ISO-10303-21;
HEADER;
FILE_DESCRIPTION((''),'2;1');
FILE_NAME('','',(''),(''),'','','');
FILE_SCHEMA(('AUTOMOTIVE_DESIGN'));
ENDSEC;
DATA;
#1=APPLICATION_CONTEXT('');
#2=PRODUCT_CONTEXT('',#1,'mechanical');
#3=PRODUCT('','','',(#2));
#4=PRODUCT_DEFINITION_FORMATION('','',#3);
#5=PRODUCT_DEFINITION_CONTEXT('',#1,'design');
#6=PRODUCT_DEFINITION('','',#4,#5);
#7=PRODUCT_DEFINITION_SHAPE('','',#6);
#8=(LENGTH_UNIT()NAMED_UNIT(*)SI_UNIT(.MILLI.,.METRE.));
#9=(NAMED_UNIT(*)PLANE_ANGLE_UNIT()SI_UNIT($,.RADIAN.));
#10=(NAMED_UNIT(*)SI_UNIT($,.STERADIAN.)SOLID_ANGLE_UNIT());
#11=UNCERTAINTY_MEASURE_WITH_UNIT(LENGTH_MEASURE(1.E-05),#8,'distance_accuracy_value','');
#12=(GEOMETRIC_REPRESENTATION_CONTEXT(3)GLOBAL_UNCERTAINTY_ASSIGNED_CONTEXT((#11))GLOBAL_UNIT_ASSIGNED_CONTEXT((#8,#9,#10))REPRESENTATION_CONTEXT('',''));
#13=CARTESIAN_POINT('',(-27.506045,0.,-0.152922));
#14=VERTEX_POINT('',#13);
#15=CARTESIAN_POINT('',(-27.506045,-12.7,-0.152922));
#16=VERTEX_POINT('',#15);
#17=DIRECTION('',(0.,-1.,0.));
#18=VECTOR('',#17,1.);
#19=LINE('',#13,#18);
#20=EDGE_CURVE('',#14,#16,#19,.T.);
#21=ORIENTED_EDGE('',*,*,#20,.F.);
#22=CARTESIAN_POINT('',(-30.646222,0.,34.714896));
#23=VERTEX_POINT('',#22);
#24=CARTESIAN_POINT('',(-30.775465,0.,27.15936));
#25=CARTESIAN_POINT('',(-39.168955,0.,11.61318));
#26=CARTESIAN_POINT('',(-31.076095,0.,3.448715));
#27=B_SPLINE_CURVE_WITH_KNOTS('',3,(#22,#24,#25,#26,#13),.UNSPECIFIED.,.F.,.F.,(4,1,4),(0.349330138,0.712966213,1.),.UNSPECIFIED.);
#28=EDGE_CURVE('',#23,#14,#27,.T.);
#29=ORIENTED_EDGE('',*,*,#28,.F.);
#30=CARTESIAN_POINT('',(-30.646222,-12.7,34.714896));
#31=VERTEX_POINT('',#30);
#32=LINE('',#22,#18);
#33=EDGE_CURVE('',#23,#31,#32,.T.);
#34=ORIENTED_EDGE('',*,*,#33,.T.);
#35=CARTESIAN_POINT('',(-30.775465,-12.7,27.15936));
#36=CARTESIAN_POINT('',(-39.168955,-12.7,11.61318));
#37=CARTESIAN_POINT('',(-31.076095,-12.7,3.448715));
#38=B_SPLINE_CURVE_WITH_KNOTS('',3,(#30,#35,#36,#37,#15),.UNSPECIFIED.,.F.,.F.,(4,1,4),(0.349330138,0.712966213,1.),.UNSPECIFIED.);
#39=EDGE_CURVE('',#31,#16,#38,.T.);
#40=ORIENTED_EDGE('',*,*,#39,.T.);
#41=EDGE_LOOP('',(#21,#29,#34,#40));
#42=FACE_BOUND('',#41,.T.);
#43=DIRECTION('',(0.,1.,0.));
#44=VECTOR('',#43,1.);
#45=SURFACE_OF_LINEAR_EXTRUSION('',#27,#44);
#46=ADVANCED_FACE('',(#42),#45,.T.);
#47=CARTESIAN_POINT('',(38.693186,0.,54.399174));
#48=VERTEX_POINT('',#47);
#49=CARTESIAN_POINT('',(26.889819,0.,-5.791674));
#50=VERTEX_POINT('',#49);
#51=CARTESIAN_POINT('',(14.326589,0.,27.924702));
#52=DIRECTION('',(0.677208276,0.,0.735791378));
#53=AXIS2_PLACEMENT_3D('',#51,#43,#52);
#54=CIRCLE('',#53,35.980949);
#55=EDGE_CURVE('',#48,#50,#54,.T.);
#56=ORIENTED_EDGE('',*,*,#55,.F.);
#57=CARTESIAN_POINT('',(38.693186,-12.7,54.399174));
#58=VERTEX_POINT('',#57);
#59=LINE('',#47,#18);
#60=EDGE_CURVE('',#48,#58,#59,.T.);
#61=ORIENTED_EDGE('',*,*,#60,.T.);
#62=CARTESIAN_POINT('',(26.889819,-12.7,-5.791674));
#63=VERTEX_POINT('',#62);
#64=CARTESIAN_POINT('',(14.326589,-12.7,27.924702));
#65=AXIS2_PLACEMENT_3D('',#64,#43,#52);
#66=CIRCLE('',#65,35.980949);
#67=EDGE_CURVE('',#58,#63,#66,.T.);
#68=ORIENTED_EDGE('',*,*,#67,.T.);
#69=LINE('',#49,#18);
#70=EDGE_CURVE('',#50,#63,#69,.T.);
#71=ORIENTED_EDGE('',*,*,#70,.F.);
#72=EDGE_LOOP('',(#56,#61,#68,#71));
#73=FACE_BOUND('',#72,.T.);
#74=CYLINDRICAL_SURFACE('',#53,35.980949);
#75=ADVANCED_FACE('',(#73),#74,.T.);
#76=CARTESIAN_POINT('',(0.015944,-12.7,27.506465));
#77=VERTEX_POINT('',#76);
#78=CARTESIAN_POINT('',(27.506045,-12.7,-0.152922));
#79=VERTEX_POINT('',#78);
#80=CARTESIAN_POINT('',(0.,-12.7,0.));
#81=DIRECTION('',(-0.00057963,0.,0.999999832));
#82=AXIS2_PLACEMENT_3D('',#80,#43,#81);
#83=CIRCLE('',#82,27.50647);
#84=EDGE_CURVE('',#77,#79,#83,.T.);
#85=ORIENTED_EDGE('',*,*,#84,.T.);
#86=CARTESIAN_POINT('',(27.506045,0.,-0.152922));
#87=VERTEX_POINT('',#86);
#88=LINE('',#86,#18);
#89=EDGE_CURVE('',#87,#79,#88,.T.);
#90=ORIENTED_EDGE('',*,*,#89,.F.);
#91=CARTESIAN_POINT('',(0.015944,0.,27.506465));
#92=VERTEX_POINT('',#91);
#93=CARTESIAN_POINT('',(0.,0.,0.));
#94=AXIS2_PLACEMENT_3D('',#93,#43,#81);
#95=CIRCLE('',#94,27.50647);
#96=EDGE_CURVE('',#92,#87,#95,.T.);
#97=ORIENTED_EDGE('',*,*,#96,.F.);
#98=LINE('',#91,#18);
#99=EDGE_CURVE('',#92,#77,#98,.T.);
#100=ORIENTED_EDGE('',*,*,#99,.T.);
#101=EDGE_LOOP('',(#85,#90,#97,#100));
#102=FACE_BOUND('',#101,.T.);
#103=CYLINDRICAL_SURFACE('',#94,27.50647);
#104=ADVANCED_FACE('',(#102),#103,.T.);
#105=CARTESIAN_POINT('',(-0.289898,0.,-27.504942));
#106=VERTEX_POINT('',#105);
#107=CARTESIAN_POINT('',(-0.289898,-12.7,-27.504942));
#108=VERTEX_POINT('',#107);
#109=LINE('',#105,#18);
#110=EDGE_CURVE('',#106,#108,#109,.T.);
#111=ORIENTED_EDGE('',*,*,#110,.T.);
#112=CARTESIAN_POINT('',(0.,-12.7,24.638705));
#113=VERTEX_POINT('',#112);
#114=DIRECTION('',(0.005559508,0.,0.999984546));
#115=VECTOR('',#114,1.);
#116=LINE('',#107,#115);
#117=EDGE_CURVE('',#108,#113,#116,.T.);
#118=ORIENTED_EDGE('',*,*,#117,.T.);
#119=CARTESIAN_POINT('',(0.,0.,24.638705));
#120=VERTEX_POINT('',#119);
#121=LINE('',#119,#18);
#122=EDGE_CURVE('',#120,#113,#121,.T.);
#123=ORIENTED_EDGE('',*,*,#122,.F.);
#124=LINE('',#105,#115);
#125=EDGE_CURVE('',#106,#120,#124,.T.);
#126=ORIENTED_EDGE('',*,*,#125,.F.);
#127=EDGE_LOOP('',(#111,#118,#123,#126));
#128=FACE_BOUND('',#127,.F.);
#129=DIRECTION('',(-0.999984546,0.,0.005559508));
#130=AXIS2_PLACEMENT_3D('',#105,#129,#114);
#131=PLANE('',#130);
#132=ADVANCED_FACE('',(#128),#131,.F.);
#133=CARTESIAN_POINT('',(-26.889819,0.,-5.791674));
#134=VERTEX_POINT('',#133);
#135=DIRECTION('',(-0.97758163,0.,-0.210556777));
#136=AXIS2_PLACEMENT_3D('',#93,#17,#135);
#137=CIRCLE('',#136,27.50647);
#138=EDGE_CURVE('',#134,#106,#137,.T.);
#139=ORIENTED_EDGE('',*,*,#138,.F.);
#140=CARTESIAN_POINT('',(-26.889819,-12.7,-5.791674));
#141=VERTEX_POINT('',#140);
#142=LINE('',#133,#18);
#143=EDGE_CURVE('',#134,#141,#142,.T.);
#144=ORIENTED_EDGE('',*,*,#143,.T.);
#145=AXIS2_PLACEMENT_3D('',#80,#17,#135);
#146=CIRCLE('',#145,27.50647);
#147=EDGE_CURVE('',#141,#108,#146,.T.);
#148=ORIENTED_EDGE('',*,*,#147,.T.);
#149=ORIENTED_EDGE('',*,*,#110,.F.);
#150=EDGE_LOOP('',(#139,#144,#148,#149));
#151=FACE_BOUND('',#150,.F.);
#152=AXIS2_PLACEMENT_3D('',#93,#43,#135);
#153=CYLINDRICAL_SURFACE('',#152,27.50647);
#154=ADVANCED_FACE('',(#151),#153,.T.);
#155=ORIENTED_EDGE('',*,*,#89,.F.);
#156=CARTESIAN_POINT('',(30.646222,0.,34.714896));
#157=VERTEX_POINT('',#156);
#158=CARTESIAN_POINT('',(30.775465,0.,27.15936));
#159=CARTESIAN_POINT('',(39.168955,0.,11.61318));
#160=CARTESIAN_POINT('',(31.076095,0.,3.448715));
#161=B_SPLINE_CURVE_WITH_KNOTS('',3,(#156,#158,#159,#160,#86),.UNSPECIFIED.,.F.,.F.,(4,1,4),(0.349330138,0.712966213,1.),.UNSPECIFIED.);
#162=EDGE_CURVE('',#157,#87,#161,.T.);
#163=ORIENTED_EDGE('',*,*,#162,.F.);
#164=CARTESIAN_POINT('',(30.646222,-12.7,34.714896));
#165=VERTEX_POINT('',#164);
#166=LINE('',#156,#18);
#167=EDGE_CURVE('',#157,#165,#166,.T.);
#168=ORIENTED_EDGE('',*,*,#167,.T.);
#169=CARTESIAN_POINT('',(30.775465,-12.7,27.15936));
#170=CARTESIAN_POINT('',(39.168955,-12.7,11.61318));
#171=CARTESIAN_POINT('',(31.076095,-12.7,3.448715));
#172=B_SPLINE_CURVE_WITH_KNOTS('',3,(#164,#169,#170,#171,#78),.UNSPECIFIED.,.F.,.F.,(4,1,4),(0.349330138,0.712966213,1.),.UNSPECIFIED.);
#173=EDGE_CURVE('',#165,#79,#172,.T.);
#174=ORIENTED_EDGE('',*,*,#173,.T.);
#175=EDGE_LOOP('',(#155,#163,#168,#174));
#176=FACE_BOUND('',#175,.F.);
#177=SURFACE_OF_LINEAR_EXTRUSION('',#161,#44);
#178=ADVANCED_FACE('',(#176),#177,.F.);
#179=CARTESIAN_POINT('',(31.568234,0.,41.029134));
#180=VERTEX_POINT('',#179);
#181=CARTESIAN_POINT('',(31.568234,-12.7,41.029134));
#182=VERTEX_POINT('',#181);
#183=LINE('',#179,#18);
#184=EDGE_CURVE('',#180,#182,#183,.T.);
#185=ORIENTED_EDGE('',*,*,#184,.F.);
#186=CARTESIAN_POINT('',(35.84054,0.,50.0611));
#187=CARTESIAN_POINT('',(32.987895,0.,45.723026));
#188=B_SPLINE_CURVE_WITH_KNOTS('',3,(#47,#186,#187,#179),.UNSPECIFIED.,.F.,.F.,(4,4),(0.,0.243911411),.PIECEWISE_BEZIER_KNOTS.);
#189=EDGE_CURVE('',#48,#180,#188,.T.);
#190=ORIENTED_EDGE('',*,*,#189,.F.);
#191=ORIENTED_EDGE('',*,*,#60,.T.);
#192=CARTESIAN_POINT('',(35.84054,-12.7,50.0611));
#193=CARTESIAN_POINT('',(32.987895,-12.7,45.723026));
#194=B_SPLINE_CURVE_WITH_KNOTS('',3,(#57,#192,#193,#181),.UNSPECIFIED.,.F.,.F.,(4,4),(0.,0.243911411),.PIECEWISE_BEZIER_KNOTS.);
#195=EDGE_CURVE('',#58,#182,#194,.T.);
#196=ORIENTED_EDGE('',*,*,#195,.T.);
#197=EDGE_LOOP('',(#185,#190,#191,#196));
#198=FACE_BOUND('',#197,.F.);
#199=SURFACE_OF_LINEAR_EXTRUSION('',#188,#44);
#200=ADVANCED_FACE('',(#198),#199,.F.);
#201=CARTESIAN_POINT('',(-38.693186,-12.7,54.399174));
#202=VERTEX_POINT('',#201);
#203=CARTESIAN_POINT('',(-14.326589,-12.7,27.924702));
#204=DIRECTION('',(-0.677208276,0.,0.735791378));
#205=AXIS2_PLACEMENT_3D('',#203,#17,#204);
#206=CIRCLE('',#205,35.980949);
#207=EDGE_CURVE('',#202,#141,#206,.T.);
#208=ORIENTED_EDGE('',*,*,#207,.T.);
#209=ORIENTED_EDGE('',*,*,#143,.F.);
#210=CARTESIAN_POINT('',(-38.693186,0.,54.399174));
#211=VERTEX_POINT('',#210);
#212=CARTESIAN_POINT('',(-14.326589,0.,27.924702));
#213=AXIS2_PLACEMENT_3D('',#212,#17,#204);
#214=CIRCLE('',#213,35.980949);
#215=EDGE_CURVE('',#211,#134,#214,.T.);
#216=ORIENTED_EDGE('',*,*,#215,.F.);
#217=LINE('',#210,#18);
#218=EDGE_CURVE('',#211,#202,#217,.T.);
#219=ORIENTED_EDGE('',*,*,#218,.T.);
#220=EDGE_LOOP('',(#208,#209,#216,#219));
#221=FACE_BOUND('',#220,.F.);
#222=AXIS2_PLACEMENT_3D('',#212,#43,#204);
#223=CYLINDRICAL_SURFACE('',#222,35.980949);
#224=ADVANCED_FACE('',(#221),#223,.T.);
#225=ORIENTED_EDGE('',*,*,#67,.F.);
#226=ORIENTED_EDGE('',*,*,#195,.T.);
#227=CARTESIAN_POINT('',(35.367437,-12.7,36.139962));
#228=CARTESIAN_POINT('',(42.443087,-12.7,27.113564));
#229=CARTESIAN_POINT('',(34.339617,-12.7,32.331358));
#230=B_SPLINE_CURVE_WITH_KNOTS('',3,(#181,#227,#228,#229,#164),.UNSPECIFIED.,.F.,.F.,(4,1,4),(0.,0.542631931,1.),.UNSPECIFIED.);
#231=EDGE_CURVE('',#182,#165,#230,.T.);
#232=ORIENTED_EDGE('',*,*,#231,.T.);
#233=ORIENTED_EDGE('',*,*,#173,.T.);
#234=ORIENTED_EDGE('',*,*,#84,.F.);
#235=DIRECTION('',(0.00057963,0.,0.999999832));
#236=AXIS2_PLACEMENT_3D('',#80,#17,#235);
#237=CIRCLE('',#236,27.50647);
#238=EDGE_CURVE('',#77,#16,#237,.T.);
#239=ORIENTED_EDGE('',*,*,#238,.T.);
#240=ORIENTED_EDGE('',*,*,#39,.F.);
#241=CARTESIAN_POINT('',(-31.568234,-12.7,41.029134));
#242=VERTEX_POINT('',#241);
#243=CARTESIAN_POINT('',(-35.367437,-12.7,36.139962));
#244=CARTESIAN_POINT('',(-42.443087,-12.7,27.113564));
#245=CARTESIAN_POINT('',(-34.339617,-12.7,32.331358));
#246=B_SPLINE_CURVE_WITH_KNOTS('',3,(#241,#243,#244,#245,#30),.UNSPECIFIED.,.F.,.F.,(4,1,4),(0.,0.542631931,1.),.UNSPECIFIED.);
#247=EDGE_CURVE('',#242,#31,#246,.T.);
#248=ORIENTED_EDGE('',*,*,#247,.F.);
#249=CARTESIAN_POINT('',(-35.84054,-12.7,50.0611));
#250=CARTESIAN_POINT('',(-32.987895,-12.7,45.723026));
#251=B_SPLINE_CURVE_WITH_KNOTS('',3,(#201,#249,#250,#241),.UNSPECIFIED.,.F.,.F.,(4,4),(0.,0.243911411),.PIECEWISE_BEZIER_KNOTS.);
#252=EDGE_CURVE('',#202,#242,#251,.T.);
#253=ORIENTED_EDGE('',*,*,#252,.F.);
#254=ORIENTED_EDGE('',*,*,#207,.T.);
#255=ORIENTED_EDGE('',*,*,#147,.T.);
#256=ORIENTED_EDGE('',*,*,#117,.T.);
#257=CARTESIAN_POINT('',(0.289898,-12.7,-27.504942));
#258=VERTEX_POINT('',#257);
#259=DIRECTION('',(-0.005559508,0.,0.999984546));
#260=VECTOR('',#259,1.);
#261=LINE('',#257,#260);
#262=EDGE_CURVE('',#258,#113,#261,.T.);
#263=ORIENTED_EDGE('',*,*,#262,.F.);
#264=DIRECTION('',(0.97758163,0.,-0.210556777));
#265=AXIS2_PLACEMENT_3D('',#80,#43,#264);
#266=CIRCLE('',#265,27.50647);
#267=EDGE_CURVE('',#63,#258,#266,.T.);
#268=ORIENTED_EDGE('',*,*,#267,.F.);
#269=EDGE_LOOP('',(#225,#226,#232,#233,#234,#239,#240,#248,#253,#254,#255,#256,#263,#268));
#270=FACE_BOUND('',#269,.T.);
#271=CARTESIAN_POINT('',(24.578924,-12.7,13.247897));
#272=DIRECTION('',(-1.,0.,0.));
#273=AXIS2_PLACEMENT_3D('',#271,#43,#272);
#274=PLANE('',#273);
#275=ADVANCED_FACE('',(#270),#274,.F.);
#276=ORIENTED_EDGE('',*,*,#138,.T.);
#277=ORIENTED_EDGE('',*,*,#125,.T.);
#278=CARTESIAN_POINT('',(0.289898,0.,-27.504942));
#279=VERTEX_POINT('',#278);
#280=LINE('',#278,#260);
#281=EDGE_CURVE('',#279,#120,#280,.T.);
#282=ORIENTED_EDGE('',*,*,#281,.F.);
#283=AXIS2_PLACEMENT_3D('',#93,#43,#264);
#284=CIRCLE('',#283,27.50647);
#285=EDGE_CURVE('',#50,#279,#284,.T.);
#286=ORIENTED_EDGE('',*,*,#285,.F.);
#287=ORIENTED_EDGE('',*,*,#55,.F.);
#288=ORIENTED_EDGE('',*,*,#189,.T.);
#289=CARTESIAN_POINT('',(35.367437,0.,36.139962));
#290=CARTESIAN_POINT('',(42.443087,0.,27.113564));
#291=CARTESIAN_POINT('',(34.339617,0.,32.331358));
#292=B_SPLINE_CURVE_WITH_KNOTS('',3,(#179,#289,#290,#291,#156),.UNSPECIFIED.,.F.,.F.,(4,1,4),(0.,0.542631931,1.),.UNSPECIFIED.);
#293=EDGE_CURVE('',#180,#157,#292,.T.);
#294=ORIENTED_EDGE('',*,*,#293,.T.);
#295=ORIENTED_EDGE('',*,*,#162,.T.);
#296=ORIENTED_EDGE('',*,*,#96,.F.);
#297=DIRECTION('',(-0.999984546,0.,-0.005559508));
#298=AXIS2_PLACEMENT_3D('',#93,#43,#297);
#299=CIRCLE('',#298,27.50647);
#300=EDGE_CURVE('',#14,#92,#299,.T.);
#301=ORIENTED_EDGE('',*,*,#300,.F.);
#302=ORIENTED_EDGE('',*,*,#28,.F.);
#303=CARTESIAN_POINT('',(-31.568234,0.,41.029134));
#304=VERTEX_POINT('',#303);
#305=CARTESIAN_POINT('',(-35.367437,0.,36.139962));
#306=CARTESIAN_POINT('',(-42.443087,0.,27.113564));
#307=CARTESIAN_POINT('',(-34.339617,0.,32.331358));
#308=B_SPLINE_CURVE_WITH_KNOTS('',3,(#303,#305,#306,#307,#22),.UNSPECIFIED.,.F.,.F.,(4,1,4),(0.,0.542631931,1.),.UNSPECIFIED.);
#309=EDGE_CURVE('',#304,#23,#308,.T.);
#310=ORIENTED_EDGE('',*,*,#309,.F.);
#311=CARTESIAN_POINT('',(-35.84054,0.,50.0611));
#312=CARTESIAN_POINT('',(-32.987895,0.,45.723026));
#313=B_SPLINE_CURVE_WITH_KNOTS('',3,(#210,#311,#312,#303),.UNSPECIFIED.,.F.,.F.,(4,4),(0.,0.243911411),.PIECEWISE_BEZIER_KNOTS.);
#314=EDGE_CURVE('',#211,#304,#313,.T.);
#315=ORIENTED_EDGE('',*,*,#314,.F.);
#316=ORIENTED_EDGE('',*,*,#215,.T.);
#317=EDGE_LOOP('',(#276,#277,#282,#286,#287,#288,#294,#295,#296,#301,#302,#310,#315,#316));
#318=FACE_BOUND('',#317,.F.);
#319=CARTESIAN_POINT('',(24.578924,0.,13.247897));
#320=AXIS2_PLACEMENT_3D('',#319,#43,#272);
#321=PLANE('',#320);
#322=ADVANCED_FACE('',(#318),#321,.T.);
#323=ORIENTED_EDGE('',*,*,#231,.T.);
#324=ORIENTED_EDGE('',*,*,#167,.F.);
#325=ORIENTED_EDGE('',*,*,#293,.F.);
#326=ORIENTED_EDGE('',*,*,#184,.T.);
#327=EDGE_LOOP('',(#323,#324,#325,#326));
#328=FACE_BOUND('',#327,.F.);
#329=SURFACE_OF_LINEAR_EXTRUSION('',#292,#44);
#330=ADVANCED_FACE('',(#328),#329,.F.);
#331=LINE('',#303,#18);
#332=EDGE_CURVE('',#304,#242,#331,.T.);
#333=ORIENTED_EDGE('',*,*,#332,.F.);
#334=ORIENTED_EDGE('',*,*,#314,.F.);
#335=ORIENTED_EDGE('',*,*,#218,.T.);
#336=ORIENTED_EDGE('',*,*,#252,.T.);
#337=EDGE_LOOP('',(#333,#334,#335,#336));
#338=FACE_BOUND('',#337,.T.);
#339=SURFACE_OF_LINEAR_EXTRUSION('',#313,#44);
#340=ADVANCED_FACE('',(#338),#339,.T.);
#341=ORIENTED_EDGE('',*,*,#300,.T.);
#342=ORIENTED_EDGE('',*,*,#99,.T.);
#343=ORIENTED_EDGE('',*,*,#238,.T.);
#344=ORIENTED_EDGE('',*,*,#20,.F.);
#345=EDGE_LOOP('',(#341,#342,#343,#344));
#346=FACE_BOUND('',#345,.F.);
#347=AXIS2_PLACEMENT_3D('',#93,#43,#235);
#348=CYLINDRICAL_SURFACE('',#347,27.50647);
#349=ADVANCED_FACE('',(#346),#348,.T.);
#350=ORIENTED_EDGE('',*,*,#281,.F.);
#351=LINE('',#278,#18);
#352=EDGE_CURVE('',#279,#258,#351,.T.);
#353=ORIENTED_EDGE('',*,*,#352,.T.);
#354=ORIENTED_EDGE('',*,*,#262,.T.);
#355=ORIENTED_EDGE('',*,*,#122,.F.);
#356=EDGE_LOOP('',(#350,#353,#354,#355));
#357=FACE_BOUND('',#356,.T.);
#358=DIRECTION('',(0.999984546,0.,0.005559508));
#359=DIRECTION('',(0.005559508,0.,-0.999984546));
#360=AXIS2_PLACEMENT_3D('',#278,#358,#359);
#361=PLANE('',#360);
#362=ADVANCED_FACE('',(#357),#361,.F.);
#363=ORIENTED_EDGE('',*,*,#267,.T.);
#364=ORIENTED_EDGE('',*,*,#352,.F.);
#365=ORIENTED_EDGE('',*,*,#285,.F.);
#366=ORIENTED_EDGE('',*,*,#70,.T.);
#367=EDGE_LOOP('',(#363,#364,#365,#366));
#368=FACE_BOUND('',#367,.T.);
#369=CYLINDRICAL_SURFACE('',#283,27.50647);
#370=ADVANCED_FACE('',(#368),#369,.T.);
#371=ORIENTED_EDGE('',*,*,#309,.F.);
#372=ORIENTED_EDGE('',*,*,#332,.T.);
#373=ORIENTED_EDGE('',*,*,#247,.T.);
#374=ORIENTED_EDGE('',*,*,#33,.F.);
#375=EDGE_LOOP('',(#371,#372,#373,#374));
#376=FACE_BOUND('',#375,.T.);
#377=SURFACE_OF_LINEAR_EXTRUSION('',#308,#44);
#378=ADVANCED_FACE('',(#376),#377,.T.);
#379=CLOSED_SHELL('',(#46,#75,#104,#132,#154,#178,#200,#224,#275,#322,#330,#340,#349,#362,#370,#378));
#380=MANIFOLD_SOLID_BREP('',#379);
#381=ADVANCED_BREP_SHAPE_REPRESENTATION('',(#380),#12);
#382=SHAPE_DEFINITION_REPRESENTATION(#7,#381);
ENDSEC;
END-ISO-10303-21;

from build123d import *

# Parameters (mm, degrees)
F1_DEPTH = 12.7


with BuildPart() as f1:
    # F0 (on Front) → F1 (new body)
    with BuildSketch(Plane.XZ):
        with BuildLine():
            add(Edge.make_bspline(
                [(-38.6931858957, 54.3991737068), (-35.8405403413, 50.0610999657), (-32.9878947868, 45.7230262247), (-31.5682335133, 41.0291340153)],
                knots=[0, 0, 0, 0, 0.2439114114, 0.2439114114, 0.2439114114, 0.2439114114], degree=3))
            ThreePointArc((-38.6931858957, 54.3991737068), (-49.6350522053, 21.0007464247), (-26.8898194638, -5.7916736001))
            ThreePointArc((-26.8898194638, -5.7916736001), (-17.3939863098, -21.3085690308), (-0.2898975187, -27.5049419798))
            Line((-0.2898975187, -27.5049419798), (0.0159435843, 27.5064650525))
            ThreePointArc((0.0159435843, 27.5064650525), (-19.4983805085, 19.401521369), (-27.5060445831, -0.1529224477))
            add(Edge.make_bspline(
                [(-30.6462217122, 34.7148962319), (-30.7754650722, 27.1593597), (-39.1689548904, 11.6131795075), (-31.0760950053, 3.448715235), (-27.5060445831, -0.1529224477)],
                knots=[0.3493301375, 0.3493301375, 0.3493301375, 0.3493301375, 0.7129662134, 1, 1, 1, 1], degree=3))
            add(Edge.make_bspline(
                [(-31.5682335133, 41.0291340153), (-35.3674367785, 36.1399617518), (-42.4430865557, 27.1135638958), (-34.3396168251, 32.3313583593), (-30.6462217122, 34.7148962319)],
                knots=[0, 0, 0, 0, 0.5426319314, 1, 1, 1, 1], degree=3))
        make_face()
    extrude(amount=F1_DEPTH)

    # F2: F1 across plane


with BuildPart() as f1_1:
    add(f1.part)
    add(f1.part.mirror(Plane.YZ))


solid = f1_1.part
